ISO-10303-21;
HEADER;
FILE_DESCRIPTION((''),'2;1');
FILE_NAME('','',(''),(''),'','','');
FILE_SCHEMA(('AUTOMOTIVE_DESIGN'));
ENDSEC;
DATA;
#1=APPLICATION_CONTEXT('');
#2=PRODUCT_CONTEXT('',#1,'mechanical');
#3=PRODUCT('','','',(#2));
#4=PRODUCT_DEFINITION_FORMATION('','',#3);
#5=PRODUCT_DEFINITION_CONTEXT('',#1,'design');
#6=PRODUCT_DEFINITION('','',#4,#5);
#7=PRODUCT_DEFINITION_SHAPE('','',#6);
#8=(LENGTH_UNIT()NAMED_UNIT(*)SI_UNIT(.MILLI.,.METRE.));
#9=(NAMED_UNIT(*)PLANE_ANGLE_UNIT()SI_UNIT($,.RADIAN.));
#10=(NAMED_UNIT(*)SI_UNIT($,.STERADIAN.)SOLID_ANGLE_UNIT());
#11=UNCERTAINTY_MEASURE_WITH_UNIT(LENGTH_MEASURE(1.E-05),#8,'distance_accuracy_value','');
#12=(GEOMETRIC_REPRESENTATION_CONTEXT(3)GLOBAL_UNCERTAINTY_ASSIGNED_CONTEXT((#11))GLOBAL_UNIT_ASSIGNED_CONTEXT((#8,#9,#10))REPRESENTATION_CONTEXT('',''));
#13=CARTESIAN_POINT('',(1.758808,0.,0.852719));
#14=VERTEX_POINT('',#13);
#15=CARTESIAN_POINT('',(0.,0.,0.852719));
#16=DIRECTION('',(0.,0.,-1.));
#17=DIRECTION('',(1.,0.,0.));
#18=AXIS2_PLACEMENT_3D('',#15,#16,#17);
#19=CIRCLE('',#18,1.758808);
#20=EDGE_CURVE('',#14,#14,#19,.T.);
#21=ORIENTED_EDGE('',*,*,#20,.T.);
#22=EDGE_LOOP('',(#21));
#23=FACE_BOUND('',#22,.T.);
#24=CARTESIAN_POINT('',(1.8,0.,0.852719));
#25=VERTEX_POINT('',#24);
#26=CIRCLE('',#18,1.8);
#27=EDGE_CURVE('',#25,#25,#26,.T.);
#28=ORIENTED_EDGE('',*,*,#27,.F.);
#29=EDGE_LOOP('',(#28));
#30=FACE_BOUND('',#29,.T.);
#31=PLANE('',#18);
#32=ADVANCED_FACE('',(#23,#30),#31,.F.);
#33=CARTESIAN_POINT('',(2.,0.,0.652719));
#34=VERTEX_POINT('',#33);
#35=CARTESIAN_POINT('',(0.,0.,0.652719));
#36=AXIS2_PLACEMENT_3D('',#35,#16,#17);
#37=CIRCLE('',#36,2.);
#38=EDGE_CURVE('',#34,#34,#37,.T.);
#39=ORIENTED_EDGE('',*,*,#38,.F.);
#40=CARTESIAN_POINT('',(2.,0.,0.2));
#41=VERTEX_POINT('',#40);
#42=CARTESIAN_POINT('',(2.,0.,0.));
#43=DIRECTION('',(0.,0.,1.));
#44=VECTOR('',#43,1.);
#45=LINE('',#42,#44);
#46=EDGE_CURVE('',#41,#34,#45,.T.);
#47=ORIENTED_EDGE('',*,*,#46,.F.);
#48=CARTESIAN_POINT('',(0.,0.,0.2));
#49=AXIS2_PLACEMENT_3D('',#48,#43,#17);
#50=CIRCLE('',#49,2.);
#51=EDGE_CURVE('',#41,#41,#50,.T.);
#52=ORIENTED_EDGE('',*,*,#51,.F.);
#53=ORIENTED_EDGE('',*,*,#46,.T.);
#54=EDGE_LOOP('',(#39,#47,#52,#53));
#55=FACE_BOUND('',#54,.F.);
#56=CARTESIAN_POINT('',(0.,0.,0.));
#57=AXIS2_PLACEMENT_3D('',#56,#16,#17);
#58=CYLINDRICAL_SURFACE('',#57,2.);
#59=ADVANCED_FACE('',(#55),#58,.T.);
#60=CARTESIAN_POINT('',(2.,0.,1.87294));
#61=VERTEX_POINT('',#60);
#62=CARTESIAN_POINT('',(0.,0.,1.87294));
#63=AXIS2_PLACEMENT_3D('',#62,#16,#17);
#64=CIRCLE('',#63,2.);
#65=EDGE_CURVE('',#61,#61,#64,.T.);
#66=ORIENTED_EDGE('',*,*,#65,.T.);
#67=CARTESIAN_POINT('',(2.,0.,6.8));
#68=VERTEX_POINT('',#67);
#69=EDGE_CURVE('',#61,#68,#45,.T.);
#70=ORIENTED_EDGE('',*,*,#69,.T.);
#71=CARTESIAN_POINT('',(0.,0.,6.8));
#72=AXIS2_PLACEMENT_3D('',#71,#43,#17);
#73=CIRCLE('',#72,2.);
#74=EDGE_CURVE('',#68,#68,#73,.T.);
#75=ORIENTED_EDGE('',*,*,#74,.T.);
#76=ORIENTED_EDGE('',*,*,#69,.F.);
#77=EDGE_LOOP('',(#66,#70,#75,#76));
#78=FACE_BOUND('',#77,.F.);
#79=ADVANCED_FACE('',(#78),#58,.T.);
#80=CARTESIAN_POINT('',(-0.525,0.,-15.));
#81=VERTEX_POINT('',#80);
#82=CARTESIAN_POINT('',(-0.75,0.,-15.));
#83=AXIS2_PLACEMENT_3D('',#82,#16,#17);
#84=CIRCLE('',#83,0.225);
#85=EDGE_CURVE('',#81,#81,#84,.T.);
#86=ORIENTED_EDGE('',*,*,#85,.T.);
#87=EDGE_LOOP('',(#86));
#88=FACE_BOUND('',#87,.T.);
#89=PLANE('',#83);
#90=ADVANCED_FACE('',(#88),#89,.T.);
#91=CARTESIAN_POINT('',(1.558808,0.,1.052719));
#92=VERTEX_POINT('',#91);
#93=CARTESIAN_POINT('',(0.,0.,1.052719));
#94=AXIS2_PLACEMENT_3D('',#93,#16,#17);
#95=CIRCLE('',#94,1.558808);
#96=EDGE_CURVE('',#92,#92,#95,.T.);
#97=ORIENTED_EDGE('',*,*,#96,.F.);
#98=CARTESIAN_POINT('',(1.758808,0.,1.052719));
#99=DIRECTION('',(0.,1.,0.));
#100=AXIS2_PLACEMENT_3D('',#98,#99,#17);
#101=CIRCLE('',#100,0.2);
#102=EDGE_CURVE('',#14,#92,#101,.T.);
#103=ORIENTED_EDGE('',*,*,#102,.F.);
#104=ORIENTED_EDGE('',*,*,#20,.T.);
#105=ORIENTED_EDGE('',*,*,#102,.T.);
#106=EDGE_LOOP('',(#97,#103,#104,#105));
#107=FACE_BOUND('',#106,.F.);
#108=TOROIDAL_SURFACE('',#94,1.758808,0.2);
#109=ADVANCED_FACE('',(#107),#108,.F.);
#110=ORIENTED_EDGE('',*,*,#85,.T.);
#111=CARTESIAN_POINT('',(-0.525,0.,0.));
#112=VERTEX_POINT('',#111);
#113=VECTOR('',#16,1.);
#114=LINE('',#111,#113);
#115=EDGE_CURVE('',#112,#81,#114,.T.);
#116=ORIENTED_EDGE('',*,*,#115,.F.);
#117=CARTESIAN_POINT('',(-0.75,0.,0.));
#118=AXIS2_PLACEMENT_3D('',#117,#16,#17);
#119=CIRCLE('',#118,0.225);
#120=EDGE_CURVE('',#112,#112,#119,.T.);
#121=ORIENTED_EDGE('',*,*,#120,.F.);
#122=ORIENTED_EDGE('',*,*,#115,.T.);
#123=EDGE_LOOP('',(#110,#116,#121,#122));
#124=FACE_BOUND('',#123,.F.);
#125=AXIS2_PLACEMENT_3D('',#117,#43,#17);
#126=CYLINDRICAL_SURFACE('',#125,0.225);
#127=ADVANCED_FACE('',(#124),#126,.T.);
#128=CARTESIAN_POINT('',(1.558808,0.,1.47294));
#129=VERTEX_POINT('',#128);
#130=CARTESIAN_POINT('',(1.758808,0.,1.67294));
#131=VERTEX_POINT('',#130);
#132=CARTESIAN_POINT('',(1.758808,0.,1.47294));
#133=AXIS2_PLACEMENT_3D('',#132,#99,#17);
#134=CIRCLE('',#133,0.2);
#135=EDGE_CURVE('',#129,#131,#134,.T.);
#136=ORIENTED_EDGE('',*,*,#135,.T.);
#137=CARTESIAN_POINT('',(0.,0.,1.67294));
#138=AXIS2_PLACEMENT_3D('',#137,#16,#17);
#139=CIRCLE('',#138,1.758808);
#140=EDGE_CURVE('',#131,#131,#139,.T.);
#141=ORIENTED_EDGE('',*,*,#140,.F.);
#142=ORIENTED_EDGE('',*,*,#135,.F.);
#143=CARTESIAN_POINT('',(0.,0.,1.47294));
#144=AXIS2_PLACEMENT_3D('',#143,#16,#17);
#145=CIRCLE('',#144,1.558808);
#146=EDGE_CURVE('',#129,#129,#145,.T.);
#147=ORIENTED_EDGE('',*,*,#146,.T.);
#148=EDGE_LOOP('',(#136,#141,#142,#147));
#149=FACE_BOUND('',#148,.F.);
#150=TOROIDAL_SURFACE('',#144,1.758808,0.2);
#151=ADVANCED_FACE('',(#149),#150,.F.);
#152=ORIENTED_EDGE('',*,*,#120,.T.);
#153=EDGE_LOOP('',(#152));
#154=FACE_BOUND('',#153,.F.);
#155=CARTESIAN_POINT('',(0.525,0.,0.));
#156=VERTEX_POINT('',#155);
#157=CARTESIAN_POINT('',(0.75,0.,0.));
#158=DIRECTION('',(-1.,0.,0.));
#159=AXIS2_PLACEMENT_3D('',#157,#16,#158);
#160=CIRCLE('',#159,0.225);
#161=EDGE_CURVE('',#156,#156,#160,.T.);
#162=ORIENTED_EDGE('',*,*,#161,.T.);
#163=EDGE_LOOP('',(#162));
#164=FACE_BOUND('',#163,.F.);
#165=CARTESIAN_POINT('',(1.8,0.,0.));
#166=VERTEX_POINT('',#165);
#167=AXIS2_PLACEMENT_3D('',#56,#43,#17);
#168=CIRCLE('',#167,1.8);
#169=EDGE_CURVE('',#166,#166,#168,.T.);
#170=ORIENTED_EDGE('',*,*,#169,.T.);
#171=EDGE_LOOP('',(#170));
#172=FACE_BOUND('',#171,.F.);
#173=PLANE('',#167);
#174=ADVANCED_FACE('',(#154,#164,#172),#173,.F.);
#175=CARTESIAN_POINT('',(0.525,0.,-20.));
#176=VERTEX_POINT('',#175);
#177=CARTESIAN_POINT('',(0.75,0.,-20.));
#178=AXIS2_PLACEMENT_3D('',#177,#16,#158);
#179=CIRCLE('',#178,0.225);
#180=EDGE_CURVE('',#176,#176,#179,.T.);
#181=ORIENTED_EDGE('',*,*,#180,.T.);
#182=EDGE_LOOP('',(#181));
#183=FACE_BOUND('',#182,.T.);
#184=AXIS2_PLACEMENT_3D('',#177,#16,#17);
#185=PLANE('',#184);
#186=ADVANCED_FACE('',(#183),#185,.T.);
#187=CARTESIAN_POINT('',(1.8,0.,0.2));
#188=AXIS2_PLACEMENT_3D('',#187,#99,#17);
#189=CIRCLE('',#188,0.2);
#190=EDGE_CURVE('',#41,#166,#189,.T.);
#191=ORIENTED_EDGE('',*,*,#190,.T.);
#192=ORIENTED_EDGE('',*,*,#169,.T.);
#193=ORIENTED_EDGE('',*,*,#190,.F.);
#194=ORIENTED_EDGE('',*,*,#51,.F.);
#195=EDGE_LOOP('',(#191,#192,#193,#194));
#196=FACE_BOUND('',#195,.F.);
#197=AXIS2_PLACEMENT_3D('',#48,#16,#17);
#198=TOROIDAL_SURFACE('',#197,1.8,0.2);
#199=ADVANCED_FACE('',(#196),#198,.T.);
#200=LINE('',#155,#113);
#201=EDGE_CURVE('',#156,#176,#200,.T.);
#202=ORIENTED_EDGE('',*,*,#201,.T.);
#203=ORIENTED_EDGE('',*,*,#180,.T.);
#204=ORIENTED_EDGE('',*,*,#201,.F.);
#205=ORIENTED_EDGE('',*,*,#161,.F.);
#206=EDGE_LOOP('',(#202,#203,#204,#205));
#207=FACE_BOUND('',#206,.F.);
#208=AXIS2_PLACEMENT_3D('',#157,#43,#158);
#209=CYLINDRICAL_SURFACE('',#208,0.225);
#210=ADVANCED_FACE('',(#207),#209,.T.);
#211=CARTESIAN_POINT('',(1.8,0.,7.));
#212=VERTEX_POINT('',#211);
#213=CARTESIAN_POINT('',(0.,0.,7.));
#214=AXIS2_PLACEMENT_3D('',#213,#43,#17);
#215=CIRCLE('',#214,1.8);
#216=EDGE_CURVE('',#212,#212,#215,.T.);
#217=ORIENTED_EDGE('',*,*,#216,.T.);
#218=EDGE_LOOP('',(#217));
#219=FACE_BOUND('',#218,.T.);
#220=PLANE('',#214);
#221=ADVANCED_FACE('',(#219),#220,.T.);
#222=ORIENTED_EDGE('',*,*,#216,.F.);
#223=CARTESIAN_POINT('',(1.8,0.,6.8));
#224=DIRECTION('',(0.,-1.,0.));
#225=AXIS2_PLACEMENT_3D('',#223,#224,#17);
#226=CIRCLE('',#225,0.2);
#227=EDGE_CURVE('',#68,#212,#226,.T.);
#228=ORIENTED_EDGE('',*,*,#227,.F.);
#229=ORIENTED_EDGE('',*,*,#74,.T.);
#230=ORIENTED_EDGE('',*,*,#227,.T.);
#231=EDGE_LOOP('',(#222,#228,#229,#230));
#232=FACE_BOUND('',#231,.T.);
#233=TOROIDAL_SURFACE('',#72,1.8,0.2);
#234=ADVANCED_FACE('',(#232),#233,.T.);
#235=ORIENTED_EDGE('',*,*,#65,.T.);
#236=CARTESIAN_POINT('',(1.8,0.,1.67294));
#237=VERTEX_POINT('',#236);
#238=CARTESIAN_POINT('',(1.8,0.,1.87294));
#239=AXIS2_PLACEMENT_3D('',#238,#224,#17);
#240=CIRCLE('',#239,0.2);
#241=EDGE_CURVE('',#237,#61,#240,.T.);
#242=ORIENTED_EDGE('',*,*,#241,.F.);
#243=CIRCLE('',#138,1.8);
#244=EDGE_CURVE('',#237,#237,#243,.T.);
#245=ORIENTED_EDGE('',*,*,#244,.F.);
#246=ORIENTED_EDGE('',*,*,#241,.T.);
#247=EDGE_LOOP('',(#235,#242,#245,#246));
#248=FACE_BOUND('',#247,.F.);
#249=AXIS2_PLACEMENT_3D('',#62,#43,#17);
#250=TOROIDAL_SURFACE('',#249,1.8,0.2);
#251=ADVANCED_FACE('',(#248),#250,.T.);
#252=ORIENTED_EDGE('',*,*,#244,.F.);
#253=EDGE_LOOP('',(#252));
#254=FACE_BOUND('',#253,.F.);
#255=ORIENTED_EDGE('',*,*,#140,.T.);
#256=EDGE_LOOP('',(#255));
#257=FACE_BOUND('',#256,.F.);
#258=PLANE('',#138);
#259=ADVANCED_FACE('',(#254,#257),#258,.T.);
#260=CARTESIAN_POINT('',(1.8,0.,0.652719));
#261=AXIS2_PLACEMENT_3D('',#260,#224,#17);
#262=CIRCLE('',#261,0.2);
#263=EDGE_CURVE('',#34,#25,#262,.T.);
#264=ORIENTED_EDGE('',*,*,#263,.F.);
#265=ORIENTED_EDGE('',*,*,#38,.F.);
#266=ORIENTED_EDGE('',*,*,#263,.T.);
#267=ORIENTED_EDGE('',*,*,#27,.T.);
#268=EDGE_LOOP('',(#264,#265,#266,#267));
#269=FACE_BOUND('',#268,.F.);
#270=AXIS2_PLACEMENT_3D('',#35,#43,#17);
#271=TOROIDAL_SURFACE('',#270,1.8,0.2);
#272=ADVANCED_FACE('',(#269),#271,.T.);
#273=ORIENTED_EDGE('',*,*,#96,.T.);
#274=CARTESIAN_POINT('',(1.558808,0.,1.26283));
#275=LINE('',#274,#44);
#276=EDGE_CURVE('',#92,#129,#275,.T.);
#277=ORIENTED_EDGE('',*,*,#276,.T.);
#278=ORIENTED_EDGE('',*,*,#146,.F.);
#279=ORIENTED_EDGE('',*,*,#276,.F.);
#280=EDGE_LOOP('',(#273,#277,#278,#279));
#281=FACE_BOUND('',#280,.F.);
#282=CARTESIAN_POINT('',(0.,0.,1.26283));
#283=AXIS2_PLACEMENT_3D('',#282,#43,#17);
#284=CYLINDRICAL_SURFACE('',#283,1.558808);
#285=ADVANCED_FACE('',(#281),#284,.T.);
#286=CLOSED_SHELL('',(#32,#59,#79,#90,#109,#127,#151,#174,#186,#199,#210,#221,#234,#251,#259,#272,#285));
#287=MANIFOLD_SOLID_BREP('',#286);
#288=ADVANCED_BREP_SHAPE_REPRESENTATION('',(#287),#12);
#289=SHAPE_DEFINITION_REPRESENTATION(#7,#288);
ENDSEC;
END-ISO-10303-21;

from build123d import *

# Parameters (mm, degrees)
F0_R     = 2
F1_DEPTH = 7
F2_W     = 1.194575103
F2_H     = 0.820221263
F4_R     = 0.2
F5_R     = 0.225
F6_DEPTH = 15
F7_DEPTH = 20


with BuildPart() as f1:
    # F0 (on Top) → F1 (new body)
    with BuildSketch(Plane.XY):
        Circle(F0_R)
    extrude(amount=F1_DEPTH)

    # F2 (on Front) → F3 (revolve, cut)
    with BuildSketch(Plane.XZ):
        with Locations((2.1560959285, 1.2628298136)):
            Rectangle(F2_W, F2_H)
    revolve(axis=Axis((0, 0, 0), (0, 0, -1)), mode=Mode.SUBTRACT)

    # F4
    f4_edges = [f1.edges().sort_by_distance(p)[0] for p in [
        (-2, 0, 7),
        (-2, 0, 1.67294),
        (-1.558808, 0, 1.67294),
        (-2, 0, 0.852719),
        (-2, 0, 0),
        (-1.558808, 0, 0.852719),
    ]]
    fillet(f4_edges, radius=F4_R)

    # F5 (on face) → F6 (join)
    with BuildSketch(Plane(origin=(0, 0, 0), x_dir=(1, 0, 0), z_dir=(0, 0, -1))):
        with Locations((-0.75, 0)):
            Circle(F5_R)
    extrude(amount=F6_DEPTH)

    # F5 (on face) → F7 (join)
    with BuildSketch(Plane(origin=(0, 0, 0), x_dir=(1, 0, 0), z_dir=(0, 0, -1))):
        with BuildLine():
            ThreePointArc((0.975, 0), (0.75, 0.225), (0.525, 0))
            ThreePointArc((0.525, 0), (0.75, -0.225), (0.975, 0))
        make_face()
    extrude(amount=F7_DEPTH)


solid = f1.part
